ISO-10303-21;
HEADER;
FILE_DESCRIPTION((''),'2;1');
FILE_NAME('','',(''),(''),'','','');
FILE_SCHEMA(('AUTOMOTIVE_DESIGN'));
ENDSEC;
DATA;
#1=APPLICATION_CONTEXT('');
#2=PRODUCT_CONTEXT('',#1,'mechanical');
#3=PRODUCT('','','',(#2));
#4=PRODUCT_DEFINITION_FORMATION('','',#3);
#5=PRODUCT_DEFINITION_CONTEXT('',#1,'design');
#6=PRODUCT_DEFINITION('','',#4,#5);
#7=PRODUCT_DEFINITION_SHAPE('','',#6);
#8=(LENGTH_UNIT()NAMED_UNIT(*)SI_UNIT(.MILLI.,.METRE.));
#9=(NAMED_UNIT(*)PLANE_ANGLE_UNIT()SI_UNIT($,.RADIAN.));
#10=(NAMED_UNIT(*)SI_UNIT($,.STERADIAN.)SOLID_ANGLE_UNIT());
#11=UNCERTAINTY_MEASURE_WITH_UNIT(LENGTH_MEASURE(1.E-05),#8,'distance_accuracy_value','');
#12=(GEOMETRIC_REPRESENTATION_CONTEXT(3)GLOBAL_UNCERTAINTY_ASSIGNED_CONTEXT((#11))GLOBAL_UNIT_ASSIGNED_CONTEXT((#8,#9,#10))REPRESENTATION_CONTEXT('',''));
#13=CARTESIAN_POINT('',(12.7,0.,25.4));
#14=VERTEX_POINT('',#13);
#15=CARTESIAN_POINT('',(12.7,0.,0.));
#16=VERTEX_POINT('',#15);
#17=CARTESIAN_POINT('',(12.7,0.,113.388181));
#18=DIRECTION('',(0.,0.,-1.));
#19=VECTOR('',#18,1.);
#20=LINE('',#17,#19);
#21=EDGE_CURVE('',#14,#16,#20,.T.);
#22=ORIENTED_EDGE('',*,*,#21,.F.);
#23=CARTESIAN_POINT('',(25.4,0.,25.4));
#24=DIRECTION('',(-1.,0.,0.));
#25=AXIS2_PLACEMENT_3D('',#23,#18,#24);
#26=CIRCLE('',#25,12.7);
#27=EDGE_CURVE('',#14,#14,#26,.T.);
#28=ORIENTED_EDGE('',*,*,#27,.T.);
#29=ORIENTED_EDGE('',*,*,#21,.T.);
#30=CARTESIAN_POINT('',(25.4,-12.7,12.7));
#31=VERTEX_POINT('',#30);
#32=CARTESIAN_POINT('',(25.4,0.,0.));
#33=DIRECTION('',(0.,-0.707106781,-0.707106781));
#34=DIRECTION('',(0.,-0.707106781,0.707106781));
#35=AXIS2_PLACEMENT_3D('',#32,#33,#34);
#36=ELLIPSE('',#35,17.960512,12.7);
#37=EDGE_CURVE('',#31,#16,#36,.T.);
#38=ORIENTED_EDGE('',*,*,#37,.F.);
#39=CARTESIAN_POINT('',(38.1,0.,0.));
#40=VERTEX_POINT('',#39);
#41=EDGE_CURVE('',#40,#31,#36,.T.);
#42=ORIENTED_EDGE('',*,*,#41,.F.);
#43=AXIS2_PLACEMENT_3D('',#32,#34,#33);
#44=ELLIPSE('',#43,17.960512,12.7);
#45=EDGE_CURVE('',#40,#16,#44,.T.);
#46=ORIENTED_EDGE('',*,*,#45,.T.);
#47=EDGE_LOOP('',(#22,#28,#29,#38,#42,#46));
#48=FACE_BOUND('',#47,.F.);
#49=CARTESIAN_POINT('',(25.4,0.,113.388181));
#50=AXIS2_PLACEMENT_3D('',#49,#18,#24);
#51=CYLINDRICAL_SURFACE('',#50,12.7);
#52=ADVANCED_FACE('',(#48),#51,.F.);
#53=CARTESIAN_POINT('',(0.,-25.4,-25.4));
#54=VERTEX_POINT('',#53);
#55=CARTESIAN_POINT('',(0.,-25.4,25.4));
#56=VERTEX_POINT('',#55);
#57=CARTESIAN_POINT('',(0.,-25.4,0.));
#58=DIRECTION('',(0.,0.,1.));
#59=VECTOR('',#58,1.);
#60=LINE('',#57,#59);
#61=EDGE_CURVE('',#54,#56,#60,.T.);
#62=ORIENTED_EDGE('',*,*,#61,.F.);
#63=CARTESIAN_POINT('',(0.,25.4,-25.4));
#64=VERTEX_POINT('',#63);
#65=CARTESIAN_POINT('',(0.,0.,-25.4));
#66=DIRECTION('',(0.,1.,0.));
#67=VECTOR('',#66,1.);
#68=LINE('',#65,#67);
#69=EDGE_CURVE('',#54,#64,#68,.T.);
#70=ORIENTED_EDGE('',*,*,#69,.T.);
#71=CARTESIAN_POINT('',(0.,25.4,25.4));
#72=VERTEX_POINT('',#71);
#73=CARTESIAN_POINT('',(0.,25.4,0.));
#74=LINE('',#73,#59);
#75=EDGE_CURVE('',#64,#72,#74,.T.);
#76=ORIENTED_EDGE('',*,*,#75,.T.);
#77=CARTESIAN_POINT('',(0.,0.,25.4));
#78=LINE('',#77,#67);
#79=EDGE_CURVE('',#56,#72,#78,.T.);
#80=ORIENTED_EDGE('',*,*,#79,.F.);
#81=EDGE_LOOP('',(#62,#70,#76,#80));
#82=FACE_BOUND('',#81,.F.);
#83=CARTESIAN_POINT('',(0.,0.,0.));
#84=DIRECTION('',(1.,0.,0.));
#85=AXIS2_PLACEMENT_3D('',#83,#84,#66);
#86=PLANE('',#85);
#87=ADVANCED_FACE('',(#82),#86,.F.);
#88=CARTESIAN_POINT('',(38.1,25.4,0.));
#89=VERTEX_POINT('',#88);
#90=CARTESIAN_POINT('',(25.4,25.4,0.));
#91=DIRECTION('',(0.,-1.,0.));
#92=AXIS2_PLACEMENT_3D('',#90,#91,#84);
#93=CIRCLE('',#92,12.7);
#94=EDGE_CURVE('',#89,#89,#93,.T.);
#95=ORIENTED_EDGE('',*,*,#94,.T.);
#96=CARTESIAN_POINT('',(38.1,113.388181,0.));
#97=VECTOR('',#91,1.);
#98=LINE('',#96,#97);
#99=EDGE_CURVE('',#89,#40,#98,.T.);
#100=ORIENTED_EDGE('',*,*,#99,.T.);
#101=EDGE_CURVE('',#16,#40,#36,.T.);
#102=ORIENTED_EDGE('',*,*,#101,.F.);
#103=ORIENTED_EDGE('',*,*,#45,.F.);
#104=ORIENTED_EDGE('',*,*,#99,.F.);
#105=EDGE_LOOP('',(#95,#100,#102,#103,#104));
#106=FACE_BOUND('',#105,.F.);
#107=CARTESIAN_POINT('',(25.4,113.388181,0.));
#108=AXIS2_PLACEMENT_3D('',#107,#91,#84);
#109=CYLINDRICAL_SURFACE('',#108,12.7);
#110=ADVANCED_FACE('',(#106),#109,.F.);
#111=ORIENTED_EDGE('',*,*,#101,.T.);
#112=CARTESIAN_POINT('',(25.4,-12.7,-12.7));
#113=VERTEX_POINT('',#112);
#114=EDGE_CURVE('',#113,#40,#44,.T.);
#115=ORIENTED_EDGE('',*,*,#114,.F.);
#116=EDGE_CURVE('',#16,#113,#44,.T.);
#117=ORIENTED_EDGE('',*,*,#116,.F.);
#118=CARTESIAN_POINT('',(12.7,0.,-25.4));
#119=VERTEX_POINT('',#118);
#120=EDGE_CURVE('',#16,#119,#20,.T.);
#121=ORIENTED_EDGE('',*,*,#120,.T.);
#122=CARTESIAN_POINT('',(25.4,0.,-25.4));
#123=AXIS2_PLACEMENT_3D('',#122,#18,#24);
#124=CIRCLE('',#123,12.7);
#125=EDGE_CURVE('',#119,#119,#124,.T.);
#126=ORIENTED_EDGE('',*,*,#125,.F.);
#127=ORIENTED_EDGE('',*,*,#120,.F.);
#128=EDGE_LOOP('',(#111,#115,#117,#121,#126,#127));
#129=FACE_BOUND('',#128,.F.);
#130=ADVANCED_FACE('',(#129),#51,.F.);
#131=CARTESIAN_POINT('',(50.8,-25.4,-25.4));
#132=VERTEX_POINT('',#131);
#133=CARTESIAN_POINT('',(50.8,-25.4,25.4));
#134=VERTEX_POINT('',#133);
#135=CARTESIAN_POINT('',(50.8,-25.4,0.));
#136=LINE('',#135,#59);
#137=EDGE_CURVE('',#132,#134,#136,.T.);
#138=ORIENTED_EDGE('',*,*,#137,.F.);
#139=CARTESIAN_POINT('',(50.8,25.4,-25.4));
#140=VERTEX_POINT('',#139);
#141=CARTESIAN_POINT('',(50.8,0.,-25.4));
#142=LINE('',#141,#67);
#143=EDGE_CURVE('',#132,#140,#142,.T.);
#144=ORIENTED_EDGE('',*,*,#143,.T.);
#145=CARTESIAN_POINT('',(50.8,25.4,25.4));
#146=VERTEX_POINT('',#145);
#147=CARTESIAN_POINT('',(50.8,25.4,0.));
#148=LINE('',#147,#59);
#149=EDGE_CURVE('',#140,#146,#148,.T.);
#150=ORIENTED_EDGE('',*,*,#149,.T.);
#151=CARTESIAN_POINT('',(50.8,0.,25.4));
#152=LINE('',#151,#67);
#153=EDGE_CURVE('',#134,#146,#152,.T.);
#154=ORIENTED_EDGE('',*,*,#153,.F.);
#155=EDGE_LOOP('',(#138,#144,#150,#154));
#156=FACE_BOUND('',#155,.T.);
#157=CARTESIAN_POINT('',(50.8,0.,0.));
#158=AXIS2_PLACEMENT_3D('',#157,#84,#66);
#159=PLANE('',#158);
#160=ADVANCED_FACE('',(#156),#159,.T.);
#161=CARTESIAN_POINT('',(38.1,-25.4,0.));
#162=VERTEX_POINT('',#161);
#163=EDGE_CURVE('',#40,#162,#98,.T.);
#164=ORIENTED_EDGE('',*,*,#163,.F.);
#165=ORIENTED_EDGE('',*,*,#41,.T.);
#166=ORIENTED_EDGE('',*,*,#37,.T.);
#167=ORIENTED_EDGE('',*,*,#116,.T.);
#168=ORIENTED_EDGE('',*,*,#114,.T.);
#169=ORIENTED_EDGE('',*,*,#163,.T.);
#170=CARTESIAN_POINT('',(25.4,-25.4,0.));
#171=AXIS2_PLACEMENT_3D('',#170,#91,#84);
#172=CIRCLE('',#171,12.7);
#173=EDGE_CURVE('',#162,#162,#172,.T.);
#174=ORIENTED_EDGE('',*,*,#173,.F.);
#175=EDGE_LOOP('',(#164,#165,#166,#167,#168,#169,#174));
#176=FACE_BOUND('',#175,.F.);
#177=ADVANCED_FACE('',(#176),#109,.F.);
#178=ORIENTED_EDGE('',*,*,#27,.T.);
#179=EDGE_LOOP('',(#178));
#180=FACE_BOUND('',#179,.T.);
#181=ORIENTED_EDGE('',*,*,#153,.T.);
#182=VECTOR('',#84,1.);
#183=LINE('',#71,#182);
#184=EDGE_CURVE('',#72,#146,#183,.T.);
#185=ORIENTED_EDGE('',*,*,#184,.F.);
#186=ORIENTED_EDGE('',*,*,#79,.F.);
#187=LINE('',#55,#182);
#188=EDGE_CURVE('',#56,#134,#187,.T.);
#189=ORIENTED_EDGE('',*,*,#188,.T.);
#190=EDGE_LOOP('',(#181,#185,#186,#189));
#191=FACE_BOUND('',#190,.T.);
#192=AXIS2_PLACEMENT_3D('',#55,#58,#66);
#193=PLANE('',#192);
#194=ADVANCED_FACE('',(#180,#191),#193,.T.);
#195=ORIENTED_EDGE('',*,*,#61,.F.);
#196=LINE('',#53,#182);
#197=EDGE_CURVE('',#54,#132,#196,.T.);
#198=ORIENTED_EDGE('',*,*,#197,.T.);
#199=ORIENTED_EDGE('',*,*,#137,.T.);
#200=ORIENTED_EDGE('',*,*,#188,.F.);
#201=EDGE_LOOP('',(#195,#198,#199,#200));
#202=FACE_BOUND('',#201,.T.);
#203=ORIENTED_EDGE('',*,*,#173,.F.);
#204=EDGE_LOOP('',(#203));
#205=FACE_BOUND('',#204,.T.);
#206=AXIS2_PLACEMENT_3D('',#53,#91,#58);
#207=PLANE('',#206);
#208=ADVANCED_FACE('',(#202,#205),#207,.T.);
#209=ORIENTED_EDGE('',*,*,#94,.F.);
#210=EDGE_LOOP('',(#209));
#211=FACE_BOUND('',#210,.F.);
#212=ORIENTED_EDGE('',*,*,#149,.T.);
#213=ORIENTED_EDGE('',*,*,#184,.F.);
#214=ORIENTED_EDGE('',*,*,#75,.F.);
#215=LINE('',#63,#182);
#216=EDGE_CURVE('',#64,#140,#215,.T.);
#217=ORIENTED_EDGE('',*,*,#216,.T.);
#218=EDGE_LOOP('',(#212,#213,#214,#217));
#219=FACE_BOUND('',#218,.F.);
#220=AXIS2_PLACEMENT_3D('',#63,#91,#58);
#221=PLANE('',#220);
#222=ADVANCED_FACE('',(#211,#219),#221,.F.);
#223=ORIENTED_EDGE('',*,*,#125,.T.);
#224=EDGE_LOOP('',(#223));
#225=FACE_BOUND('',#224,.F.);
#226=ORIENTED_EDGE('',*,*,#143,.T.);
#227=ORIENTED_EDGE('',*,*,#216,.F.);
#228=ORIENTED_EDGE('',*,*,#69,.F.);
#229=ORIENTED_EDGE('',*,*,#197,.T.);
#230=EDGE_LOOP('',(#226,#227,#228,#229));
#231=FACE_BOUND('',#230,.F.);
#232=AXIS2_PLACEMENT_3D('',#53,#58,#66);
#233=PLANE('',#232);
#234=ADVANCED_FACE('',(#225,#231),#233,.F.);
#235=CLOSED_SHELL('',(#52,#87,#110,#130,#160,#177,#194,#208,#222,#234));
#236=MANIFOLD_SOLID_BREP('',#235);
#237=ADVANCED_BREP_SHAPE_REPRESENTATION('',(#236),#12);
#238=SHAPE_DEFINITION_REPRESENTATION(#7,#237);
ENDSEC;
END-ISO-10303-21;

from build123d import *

# Parameters (mm, degrees)
F0_W     = 50.8
F0_H     = 50.8
F0_R     = 12.7
F1_DEPTH = 50.8
F3_D     = 25.4
F5_D     = 25.4


# Not quite as in the source:
# - the program builds the solid bodies; features that only make, move or delete a surface that nothing else refers to are left out


with BuildPart() as f1:
    # F0 (on Right) → F1 (new body)
    with BuildSketch(Plane.YZ):
        Rectangle(F0_W, F0_H)
        Circle(F0_R, mode=Mode.SUBTRACT)
        Circle(F0_R)
    extrude(amount=F1_DEPTH)

    # F3 (through all)
    with Locations(Plane(origin=(0, 25.4, 0), x_dir=(-1, 0, 0), z_dir=(0, 1, 0))):
        with Locations((-25.4, 0)):
            Hole(F3_D / 2)

    # F5 (through all)
    with Locations(Plane.XY.offset(25.4)):
        with Locations((25.4, 0)):
            Hole(F5_D / 2)


solid = f1.part
